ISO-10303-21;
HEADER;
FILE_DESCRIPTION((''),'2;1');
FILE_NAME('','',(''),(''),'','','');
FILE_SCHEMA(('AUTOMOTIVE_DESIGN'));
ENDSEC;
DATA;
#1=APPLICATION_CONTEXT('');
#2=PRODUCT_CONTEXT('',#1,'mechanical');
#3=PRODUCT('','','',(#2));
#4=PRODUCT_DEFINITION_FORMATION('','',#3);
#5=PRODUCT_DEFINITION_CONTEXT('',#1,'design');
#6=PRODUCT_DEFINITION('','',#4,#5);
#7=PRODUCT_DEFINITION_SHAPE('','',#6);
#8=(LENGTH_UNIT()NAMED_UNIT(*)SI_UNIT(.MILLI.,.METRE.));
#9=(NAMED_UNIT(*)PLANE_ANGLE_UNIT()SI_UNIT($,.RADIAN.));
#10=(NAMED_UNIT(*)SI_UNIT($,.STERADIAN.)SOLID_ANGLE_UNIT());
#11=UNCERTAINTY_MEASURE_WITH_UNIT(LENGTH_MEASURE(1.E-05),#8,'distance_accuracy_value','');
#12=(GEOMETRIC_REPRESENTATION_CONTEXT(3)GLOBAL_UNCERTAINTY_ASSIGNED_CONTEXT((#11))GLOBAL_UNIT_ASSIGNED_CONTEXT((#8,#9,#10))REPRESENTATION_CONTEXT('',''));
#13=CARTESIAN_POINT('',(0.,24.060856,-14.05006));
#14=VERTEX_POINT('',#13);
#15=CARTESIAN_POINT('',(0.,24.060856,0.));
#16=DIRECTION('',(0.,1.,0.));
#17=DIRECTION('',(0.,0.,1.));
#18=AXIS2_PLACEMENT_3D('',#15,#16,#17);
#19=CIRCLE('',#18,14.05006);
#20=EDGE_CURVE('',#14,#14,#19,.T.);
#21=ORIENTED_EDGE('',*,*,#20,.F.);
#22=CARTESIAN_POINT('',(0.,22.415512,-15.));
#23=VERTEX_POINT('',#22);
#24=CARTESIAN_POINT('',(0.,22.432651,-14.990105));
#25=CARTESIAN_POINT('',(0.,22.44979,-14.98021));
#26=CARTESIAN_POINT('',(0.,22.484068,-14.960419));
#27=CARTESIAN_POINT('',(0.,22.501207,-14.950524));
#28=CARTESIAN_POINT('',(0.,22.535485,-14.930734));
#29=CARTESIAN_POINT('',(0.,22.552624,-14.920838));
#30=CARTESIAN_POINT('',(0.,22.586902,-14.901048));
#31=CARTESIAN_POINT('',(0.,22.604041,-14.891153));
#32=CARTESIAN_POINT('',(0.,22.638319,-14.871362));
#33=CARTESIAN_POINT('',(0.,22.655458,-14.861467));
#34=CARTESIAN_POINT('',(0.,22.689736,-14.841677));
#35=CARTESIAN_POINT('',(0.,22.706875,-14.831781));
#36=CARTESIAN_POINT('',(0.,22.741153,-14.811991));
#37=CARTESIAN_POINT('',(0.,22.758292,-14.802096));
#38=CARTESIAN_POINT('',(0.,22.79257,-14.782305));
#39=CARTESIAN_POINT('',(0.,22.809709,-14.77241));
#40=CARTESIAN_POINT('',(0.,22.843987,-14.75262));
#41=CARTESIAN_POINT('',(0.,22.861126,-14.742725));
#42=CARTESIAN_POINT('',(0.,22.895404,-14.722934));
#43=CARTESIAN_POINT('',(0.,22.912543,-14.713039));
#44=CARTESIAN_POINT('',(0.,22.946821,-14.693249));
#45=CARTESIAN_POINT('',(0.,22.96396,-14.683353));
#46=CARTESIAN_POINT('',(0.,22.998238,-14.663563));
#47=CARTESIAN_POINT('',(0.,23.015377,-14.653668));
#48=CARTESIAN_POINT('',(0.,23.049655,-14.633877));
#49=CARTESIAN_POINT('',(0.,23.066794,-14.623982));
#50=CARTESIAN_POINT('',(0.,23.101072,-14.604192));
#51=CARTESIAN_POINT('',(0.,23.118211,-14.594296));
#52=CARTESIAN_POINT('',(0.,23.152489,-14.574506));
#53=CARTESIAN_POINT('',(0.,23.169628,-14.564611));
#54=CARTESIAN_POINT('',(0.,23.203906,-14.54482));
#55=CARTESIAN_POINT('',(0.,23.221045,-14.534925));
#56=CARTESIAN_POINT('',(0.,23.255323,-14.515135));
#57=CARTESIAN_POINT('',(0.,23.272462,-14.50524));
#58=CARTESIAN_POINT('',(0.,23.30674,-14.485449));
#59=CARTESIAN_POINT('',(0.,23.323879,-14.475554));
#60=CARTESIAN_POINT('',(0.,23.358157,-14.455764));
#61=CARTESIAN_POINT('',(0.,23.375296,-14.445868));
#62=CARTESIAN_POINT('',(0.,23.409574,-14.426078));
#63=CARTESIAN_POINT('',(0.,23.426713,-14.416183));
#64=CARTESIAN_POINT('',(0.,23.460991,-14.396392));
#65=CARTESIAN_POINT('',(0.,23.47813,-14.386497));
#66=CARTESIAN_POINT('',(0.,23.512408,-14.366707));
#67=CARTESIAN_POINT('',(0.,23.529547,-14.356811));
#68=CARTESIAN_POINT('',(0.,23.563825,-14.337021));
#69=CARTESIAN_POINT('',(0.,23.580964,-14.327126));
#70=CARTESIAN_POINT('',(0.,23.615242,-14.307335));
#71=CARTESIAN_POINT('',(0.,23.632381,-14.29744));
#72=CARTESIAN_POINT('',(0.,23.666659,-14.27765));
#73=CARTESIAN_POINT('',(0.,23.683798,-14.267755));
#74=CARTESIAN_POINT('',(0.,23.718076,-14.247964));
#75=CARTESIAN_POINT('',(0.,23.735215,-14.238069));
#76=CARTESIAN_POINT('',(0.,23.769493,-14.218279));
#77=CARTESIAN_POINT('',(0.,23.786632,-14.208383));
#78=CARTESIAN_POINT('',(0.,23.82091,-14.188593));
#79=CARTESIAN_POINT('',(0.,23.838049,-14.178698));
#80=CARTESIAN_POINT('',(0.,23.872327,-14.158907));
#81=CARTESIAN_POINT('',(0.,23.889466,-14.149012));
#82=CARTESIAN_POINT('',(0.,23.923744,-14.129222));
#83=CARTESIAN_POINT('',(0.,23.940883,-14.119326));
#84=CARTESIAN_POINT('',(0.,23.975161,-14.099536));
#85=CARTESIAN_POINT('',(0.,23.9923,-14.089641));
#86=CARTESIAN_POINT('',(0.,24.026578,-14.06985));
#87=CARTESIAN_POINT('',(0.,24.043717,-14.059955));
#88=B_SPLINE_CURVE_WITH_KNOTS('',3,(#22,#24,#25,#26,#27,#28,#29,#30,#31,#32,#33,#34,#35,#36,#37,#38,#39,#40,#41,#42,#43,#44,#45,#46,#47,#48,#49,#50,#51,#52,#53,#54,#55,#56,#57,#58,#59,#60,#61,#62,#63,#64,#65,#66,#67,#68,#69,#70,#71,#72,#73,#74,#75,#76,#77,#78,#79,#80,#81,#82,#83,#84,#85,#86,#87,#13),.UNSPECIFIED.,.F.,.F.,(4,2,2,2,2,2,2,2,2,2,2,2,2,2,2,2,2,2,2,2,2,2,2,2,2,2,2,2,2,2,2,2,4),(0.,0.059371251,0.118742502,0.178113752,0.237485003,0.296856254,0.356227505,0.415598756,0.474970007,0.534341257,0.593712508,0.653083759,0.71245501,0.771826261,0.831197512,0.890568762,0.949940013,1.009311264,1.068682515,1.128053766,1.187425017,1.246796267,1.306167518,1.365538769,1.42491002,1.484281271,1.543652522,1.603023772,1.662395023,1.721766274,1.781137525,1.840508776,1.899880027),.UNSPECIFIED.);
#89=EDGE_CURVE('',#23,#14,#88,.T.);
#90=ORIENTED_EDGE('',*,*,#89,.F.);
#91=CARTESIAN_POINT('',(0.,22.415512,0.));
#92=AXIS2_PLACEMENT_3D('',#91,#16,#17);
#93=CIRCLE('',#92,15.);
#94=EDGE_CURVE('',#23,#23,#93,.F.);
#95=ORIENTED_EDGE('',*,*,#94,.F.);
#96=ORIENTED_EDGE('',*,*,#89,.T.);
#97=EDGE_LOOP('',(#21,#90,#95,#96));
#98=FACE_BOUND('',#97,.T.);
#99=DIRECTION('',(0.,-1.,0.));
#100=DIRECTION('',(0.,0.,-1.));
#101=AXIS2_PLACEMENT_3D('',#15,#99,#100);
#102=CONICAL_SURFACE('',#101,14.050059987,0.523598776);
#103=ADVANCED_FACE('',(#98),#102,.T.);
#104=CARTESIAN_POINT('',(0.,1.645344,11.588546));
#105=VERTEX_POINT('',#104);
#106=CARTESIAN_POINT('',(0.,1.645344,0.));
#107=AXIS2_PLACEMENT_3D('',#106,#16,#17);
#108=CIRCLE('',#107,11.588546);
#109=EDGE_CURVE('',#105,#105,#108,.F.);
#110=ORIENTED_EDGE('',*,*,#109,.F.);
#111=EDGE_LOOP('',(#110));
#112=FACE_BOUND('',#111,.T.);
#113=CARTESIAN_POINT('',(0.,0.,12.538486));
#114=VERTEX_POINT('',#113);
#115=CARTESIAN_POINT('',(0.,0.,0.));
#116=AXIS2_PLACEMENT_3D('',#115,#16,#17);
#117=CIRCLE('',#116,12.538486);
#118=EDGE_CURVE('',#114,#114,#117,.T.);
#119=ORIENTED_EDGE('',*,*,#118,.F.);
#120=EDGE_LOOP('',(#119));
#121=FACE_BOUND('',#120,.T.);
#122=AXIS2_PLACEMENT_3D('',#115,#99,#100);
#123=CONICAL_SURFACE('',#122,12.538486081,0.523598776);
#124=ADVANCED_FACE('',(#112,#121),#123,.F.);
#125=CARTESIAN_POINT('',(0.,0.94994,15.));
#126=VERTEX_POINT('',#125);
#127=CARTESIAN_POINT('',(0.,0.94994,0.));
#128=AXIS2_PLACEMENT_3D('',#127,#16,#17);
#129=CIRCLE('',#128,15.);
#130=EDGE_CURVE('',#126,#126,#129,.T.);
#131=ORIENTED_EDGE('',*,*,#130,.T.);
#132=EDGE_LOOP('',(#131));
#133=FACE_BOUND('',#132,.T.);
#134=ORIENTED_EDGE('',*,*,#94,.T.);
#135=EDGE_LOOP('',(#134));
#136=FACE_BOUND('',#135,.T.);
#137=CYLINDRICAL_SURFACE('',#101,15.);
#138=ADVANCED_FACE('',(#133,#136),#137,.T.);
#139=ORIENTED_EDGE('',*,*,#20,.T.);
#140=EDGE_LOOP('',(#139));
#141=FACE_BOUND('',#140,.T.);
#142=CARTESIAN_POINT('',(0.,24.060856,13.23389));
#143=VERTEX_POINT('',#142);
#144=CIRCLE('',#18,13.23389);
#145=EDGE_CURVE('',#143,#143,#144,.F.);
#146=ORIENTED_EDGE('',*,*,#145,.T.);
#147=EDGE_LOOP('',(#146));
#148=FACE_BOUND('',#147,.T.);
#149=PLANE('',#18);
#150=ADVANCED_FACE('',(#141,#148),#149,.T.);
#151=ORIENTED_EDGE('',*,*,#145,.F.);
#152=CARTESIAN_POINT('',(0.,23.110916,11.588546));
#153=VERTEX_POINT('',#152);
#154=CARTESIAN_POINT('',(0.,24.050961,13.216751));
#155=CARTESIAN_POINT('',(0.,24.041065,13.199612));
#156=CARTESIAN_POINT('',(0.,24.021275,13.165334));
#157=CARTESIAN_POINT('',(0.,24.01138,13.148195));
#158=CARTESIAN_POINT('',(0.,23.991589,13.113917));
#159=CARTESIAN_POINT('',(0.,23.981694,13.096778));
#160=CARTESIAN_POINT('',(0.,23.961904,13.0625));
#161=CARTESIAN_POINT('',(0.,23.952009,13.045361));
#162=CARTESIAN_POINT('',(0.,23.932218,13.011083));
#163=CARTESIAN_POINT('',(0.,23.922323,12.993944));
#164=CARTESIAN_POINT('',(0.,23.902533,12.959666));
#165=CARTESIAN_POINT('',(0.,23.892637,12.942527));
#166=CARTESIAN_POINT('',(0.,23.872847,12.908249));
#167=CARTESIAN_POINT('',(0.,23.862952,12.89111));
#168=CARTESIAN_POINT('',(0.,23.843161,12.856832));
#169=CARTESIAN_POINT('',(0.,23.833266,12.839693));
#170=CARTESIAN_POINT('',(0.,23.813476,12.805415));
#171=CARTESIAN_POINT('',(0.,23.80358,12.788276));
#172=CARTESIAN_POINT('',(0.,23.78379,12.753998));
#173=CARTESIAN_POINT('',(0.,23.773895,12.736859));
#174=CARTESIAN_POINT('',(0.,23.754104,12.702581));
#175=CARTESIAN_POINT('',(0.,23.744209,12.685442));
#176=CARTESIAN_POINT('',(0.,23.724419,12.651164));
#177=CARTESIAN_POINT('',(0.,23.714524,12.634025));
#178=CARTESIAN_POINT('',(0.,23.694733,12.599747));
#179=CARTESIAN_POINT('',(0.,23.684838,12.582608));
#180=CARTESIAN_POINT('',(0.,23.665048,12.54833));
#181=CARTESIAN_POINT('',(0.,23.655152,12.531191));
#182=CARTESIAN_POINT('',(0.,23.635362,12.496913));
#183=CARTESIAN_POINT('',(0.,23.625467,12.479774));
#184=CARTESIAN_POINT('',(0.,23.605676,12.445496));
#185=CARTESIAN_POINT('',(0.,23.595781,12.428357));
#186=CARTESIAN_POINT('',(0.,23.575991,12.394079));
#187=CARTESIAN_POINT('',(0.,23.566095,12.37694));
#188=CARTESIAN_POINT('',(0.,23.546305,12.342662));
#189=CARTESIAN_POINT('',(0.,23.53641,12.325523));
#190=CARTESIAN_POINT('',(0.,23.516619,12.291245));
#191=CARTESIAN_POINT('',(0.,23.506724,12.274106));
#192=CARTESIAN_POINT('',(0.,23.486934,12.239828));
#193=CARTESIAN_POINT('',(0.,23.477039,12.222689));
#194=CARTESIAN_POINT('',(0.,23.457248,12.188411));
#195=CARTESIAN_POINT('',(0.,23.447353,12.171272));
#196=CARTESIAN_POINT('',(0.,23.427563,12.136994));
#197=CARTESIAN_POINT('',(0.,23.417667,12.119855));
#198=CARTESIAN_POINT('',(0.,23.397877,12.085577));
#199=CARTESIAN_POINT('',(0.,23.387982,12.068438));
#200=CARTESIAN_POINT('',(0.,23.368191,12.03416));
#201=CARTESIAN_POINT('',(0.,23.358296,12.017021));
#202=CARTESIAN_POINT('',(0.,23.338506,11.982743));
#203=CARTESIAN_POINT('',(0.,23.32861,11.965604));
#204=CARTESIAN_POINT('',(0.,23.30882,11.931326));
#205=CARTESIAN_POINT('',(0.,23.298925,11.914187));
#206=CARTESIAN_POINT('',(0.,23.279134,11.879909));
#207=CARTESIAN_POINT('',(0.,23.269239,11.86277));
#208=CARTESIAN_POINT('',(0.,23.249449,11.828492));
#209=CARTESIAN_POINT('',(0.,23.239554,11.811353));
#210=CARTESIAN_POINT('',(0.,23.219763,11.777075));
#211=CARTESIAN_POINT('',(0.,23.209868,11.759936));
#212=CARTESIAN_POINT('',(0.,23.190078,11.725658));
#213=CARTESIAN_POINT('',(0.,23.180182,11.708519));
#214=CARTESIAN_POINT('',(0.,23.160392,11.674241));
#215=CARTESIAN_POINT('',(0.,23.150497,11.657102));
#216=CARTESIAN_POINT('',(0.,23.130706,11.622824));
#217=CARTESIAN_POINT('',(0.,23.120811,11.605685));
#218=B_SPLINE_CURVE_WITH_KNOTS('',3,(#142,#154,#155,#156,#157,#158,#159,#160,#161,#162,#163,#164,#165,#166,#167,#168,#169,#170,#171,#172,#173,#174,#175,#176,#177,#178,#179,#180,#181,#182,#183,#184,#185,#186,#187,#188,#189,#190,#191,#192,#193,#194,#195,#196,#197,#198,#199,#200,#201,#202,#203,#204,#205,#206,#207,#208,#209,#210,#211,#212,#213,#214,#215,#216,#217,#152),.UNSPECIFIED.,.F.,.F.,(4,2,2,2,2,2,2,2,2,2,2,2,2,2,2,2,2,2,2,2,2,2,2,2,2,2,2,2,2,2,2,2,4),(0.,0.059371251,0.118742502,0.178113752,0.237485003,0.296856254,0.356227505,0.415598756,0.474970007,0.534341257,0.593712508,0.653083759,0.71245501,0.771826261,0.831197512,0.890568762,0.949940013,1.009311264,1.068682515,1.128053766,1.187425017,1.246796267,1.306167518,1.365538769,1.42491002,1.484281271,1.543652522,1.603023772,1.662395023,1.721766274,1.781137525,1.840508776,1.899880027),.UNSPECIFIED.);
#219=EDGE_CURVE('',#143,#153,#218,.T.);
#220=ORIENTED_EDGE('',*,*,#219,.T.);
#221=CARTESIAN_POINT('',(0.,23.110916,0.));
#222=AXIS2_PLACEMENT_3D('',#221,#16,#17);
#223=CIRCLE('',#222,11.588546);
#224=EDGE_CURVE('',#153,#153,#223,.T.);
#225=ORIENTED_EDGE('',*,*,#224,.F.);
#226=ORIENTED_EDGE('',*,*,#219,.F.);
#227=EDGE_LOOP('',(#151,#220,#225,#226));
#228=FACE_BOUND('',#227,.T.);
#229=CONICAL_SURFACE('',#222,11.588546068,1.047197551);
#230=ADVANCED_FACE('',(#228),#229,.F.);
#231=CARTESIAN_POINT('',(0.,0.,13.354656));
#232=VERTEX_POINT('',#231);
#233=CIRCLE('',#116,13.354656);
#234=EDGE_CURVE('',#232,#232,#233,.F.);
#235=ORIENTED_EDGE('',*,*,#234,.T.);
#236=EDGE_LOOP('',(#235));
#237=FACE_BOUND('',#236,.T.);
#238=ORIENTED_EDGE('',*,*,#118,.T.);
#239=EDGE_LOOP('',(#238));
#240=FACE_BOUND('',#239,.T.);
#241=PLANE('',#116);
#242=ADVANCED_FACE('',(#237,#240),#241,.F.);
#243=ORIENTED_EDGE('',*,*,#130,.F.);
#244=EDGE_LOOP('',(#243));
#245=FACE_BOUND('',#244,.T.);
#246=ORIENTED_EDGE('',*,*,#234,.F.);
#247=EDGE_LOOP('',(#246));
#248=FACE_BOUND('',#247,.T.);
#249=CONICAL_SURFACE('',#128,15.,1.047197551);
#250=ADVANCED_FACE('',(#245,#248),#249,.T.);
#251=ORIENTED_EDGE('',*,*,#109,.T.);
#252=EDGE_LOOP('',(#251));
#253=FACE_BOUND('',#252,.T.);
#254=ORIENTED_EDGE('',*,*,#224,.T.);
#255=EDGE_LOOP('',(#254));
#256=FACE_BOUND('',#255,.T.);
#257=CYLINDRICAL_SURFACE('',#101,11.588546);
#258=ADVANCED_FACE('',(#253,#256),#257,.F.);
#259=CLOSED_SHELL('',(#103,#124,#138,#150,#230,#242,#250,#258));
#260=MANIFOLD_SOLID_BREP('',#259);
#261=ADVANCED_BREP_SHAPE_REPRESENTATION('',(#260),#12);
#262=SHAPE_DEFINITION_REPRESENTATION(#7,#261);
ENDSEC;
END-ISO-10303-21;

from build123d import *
from OCP.BRepFilletAPI import BRepFilletAPI_MakeChamfer

# Parameters (mm, degrees)
SKETCH1_R           = 15
BOSS_EXTRUDE1_DEPTH = 24.06085588
SKETCH2_R           = 11.588546068
CUT_EXTRUDE1_DEPTH  = 33.076857478
CHAMFER1_SIZE       = 1.645344367
CHAMFER1_SIZE2      = 0.949940013


with BuildPart() as part:
    # Sketch1 → Boss-Extrude1 (new body)
    with BuildSketch(Plane(origin=(0, 0, 0), x_dir=(1, 0, 0), z_dir=(0, 1, 0))):
        Circle(SKETCH1_R)
    extrude(amount=BOSS_EXTRUDE1_DEPTH)

    # Sketch2 → Cut-Extrude1 (cut, through all)
    with BuildSketch(Plane(origin=(0, 0, 0), x_dir=(1, 0, 0), z_dir=(0, 1, 0))):
        Circle(SKETCH2_R)
    extrude(amount=CUT_EXTRUDE1_DEPTH, mode=Mode.SUBTRACT)

    # Chamfer1: one chamfer whose edges measure the first distance from different faces: ONE call of the kernel's chamfer builder (chamfer() names one face for all edges)
    chamfer1_edges_1 = [part.edges().sort_by_distance(p)[0] for p in [
        (-11.588546068, 24.06085588, 0),
    ]]
    chamfer1_side_1 = [part.faces().sort_by_distance(p)[0] for p in [
        (-14.575735931, 24.06085588, 0),
    ]]
    chamfer1_edges_2 = [part.edges().sort_by_distance(p)[0] for p in [
        (-11.588546068, 0, 0),
    ]]
    chamfer1_side_2 = [part.faces().sort_by_distance(p)[0] for p in [
        (-11.588546068, 12.03042794, 0),
    ]]
    chamfer1_edges_3 = [part.edges().sort_by_distance(p)[0] for p in [
        (-15, 0, 0),
    ]]
    chamfer1_side_3 = [part.faces().sort_by_distance(p)[0] for p in [
        (-14.575735931, 0, 0),
    ]]
    chamfer1_edges_4 = [part.edges().sort_by_distance(p)[0] for p in [
        (-15, 24.06085588, 0),
    ]]
    chamfer1_side_4 = [part.faces().sort_by_distance(p)[0] for p in [
        (-15, 12.03042794, 0),
    ]]
    chamfer1 = BRepFilletAPI_MakeChamfer(part.part.solid().wrapped)
    for e in chamfer1_edges_1:
        chamfer1.Add(CHAMFER1_SIZE, CHAMFER1_SIZE2, e.wrapped, chamfer1_side_1[0].wrapped)  # the first distance lies on this face
    for e in chamfer1_edges_2:
        chamfer1.Add(CHAMFER1_SIZE, CHAMFER1_SIZE2, e.wrapped, chamfer1_side_2[0].wrapped)  # the first distance lies on this face
    for e in chamfer1_edges_3:
        chamfer1.Add(CHAMFER1_SIZE, CHAMFER1_SIZE2, e.wrapped, chamfer1_side_3[0].wrapped)  # the first distance lies on this face
    for e in chamfer1_edges_4:
        chamfer1.Add(CHAMFER1_SIZE, CHAMFER1_SIZE2, e.wrapped, chamfer1_side_4[0].wrapped)  # the first distance lies on this face
    add(Compound.cast(chamfer1.Shape()), mode=Mode.REPLACE)


solid = part.part
